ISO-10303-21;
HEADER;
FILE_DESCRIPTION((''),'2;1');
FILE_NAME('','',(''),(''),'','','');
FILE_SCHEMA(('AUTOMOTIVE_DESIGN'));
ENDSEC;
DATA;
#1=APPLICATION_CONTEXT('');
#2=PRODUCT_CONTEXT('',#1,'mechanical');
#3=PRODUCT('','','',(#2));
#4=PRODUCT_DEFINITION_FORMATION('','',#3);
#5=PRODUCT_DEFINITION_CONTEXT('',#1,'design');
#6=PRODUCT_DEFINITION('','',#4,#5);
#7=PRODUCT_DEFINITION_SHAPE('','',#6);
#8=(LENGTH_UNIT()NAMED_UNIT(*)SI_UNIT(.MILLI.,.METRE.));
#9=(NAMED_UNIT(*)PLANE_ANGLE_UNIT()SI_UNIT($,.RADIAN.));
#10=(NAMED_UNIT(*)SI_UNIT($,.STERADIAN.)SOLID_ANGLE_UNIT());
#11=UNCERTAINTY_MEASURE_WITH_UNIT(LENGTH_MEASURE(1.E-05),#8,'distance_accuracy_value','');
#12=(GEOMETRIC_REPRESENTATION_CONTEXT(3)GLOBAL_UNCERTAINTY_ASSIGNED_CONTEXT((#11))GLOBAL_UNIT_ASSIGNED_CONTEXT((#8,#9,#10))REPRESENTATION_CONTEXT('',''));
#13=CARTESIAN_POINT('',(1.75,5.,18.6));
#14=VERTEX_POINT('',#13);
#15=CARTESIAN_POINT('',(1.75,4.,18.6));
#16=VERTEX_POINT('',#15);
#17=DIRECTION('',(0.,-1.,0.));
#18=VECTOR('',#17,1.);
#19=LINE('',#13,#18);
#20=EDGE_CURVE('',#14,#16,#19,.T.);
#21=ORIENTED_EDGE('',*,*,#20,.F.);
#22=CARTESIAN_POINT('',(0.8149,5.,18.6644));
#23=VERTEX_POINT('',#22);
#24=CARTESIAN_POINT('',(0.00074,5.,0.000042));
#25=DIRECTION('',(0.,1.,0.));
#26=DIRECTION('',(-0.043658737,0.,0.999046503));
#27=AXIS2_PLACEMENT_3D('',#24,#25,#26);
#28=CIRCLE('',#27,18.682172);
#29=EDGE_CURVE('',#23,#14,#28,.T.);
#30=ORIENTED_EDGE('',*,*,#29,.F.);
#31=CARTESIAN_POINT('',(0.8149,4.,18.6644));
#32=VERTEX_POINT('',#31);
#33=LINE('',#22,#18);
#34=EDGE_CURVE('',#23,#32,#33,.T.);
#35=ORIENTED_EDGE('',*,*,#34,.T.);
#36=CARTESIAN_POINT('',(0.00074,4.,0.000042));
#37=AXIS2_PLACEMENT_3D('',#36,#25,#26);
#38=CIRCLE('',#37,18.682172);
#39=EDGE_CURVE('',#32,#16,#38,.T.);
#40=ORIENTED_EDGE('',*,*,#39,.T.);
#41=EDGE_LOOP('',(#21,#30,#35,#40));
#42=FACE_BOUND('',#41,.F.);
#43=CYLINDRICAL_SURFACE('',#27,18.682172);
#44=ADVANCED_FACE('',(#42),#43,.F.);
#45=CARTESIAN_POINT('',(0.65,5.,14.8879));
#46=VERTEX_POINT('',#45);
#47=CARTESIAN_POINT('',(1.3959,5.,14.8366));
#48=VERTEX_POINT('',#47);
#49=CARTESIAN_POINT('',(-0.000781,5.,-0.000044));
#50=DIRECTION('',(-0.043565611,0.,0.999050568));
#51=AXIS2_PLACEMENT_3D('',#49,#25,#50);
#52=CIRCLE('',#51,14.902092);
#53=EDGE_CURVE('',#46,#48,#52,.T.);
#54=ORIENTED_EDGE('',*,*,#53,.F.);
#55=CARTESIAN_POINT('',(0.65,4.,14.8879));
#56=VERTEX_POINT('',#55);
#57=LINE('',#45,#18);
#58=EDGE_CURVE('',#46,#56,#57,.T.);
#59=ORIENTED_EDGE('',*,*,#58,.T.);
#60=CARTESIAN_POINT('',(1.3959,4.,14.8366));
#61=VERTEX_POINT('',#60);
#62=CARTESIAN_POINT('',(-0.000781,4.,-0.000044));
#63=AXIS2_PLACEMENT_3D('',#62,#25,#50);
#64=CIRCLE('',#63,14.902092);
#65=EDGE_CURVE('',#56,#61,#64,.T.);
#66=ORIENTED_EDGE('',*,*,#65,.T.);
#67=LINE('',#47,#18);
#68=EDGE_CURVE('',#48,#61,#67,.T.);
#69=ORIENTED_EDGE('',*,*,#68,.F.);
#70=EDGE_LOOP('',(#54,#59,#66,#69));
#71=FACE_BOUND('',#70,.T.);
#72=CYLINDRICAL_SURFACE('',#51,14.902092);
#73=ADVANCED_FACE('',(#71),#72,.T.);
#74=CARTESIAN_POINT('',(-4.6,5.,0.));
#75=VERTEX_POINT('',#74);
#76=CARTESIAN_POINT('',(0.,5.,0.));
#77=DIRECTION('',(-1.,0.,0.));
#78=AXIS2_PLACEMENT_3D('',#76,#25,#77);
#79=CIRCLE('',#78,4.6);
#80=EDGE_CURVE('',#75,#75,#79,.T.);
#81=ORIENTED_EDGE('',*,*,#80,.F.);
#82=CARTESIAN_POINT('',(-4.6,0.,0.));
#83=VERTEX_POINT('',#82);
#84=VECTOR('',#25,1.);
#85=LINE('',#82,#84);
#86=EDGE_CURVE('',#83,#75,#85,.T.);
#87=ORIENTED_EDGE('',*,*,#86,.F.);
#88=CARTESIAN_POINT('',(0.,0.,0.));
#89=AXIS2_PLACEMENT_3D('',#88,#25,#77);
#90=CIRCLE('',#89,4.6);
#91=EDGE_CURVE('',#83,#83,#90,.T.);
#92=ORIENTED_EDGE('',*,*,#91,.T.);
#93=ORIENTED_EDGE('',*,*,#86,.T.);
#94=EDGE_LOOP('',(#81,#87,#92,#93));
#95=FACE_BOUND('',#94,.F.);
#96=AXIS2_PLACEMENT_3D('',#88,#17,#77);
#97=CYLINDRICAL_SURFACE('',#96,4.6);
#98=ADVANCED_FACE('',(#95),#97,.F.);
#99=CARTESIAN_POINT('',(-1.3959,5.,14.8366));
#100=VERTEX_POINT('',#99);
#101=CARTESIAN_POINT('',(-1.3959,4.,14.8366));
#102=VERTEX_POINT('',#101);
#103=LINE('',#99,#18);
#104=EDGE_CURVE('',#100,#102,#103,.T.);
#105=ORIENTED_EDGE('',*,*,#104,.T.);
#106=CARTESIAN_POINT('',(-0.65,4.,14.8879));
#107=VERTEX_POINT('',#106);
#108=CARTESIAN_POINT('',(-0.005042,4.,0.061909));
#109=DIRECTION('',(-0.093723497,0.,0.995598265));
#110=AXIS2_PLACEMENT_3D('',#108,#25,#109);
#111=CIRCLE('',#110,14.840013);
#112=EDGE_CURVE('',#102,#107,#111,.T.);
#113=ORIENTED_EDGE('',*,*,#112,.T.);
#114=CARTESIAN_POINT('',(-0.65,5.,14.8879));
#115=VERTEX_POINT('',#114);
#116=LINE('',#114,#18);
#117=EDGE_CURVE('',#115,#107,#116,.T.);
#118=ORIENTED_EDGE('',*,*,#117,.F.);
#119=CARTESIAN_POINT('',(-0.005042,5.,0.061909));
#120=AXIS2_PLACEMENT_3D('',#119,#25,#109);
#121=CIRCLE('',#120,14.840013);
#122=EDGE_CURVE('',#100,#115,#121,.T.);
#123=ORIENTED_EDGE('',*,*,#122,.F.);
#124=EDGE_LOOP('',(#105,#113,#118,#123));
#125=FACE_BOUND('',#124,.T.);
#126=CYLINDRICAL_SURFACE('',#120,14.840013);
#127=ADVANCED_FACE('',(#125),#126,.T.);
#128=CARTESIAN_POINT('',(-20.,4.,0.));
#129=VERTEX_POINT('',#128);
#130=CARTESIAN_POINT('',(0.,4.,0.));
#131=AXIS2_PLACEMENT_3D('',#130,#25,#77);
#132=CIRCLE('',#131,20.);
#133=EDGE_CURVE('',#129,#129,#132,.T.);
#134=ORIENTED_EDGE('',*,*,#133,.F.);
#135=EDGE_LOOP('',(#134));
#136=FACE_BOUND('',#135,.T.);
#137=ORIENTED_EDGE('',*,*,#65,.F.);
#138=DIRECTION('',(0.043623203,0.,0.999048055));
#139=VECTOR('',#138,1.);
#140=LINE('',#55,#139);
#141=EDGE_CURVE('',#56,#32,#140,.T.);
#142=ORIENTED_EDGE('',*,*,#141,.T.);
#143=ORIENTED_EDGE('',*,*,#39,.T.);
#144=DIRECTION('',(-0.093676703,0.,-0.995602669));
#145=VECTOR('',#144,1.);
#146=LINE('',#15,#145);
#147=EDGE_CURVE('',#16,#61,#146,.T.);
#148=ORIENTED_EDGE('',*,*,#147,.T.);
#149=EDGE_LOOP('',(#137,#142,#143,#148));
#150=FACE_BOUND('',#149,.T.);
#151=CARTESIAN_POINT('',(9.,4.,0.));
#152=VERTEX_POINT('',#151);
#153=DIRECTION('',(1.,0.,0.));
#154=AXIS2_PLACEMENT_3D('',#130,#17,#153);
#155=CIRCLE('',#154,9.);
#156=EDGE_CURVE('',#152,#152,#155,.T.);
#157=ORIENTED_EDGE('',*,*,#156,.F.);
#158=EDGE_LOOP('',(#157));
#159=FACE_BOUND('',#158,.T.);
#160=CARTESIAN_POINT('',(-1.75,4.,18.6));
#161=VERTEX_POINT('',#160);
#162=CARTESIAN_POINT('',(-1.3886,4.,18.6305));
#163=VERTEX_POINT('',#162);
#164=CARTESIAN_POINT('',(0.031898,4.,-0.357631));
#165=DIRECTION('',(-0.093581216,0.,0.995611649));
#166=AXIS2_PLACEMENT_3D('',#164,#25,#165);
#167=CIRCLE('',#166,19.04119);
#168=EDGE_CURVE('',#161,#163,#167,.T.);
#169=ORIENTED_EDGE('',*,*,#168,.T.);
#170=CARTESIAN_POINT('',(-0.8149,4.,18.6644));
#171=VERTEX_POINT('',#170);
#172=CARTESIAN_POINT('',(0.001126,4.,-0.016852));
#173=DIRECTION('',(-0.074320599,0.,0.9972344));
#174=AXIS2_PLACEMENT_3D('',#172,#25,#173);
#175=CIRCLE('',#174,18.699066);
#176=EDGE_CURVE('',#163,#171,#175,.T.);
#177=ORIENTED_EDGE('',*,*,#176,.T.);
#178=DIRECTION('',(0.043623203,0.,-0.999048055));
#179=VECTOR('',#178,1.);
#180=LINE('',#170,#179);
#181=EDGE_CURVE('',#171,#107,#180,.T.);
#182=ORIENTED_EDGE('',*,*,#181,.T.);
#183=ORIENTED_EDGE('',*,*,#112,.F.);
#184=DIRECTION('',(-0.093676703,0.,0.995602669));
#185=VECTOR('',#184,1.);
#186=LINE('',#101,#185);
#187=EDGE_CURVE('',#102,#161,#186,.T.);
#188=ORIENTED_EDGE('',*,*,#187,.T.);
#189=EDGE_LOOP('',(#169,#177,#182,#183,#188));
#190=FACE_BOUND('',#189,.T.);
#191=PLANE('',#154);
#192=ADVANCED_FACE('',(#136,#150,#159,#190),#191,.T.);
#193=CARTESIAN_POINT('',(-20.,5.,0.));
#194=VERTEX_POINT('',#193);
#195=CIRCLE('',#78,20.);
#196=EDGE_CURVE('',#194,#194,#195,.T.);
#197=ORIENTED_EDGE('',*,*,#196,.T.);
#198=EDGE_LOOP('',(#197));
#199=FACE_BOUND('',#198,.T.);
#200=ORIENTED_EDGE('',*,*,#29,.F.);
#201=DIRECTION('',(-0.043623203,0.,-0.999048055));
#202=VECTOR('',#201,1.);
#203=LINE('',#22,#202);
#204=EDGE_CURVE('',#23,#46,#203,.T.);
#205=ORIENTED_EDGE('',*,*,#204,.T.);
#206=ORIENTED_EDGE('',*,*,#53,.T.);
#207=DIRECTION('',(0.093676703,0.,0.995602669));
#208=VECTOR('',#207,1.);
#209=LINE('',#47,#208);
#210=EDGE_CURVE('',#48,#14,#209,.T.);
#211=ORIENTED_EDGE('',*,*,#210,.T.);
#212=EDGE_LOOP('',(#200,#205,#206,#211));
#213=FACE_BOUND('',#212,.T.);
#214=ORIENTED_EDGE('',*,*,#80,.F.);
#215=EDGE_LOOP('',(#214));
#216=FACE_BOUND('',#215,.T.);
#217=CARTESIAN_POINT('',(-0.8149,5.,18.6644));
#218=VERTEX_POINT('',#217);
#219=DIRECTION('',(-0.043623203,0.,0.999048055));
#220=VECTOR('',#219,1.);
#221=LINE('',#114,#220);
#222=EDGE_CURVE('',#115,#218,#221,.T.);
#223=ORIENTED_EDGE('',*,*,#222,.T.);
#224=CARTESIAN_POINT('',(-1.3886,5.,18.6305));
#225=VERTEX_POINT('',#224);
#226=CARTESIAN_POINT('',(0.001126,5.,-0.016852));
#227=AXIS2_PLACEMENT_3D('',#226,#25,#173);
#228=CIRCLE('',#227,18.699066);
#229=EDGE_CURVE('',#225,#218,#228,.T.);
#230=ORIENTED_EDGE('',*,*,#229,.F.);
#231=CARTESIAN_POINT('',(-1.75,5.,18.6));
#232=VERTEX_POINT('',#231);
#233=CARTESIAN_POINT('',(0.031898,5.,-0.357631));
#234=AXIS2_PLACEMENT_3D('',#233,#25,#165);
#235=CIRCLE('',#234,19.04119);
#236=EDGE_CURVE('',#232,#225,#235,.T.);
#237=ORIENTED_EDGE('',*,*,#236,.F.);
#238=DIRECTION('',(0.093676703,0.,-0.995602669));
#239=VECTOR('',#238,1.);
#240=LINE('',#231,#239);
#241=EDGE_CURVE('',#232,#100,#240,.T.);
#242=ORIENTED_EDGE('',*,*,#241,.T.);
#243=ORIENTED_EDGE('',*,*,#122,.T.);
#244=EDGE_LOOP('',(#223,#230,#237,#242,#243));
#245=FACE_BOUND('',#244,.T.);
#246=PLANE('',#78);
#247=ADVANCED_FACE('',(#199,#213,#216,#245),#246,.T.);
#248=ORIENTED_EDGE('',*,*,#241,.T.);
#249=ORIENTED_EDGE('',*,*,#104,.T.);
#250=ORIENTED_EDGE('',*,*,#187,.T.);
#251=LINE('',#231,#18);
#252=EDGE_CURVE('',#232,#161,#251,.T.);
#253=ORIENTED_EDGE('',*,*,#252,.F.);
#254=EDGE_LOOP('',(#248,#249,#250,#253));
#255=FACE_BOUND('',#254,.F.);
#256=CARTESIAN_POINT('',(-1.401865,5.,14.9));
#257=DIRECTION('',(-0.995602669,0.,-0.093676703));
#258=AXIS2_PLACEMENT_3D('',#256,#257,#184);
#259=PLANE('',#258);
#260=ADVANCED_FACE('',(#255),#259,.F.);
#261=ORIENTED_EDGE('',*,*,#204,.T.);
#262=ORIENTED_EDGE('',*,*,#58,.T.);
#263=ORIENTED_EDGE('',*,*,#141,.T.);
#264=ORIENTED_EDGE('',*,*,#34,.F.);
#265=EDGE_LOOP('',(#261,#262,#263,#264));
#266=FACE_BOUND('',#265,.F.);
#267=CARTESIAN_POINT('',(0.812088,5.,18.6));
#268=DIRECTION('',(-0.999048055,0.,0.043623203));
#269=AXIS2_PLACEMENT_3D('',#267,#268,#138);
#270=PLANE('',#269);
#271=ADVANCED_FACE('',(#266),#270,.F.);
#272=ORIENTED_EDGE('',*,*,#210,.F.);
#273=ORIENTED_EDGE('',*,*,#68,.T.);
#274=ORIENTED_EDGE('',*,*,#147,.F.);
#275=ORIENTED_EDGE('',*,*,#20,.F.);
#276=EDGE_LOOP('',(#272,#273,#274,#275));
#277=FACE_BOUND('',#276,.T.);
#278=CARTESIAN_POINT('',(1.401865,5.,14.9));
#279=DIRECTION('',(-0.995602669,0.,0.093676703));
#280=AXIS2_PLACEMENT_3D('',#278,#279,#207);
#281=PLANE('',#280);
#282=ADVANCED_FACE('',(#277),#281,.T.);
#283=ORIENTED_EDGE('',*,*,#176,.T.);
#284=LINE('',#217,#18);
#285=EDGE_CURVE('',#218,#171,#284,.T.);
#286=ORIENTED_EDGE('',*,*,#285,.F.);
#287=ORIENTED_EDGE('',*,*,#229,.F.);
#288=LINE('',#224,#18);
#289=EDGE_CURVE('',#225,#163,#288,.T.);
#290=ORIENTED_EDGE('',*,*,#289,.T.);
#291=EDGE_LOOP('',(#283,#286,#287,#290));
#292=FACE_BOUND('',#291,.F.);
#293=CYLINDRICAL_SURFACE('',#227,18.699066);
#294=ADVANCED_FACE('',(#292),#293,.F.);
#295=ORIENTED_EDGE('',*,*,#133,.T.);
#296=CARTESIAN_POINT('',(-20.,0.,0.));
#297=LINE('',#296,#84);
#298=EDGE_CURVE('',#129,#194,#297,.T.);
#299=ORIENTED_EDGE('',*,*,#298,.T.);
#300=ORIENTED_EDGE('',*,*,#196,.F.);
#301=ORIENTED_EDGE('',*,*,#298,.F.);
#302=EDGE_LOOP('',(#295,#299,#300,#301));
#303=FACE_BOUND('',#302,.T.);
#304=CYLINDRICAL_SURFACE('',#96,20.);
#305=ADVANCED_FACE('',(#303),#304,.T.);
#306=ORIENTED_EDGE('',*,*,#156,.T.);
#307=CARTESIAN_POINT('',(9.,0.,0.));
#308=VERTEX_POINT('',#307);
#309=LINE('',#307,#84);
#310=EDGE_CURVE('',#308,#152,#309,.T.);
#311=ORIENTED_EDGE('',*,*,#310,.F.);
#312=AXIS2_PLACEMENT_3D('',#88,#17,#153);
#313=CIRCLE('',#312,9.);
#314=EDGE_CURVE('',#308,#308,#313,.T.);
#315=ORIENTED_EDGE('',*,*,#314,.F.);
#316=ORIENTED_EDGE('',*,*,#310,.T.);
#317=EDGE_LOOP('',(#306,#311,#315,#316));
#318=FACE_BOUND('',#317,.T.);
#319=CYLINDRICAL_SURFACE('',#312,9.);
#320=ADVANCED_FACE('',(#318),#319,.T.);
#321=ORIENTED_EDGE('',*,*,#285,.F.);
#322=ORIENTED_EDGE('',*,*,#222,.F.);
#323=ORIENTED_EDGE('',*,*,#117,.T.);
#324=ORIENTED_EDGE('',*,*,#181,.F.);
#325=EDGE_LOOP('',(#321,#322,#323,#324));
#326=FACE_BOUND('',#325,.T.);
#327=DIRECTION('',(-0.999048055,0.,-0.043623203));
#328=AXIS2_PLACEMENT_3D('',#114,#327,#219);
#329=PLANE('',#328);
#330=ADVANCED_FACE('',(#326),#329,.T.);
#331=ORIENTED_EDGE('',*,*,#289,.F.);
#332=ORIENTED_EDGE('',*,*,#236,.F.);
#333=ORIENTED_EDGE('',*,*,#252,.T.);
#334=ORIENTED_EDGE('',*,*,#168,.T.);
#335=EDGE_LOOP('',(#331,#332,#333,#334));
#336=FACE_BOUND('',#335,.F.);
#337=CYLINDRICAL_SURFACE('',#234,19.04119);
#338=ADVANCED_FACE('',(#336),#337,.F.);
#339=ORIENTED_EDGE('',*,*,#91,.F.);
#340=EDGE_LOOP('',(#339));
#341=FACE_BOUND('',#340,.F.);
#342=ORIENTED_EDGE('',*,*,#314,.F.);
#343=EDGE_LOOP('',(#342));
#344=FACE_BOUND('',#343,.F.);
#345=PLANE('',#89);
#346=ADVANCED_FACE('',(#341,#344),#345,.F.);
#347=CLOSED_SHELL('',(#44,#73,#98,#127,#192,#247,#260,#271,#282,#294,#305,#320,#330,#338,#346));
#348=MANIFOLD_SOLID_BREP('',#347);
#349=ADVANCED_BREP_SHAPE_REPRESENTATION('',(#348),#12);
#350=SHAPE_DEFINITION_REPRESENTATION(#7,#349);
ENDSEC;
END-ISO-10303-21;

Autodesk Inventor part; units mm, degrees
ref_plane "YZ Plane" through (0, 0, 0) normal (1, 0, 0) x (0, 1, 0)
ref_plane "XZ Plane" through (0, 0, 0) normal (0, 1, 0) x (-1, 0, 0)
ref_plane "XY Plane" through (0, 0, 0) normal (0, 0, 1) x (1, 0, 0)
sketch "Sketch1" plane through (0, 0, 0) normal (0, 1, 0) x (-1, 0, 0)
  circle A0 centre (0, 0) radius 20
  line L0 (0, 0) -> (20, 0)
  circle A1 centre (0, 0) radius 4.6
  dimension "d1" = 40
  dimension "d6" = 9.2
extrude "Extrusion1" add sketch "Sketch1" along normal blind 5
sketch "Sketch2" plane through (0, 0, 0) normal (0, -1, 0) x (1, 0, 0)
  circle A0 centre (0, 0) radius 4.6 projected
  circle A1 centre (0, 0) radius 20 projected
  circle A2 centre (0, 0) radius 9
  circle A3 centre (0, 0) radius 20
  dimension "d7" = 18
extrude "Extrusion2" cut sketch "Sketch2" against normal blind 4 contours A1
sketch "Sketch3" plane through (0, 5, 0) normal (0, 1, 0) x (1, 0, 0)
  circle A0 centre (0, 0) radius 4.6 projected
  circle A1 centre (0, 0) radius 20 projected
  line L0 (0, 0) -> (0, -20)
  circle A2 centre (0, 0) radius 20 projected
  line L1 (2.4, -13.5) -> (2.4, -20)
  line L2 (2.4, -20) -> (-2.4, -20)
  line L3 (-2.4, -20) -> (-2.4, -13.5)
  line L4 (-2.4, -13.5) -> (2.4, -13.5)
  line L5 (2.4, -13.5) -> (-2.4, -20) construction
  line L6 (2.4, -20) -> (-2.4, -13.5) construction
  line L7 (0.25, -18.6) -> (1.75, -18.6)
  line L8 (1.75, -18.6) -> (1.75, -14.9)
  line L9 (1.75, -14.9) -> (0.25, -14.9)
  line L10 (0.25, -14.9) -> (0.25, -18.6)
  line L11 (-0.25, -18.6) -> (-1.75, -18.6)
  line L12 (-1.75, -18.6) -> (-1.75, -14.9)
  line L13 (-1.75, -14.9) -> (-0.25, -14.9)
  line L14 (-0.25, -14.9) -> (-0.25, -18.6)
  arc A3 (-0.8149, -18.6644) -> (-1.75, -18.6) centre (0, 0) ccw
  arc A4 (-0.65, -14.8879) -> (-1.3959, -14.8366) centre (0, 0) ccw
  line L15 (0, 0) -> (-0.65, -14.8879)
  line L16 (0, 0) -> (0.65, -14.8879)
  line L17 (0, 0) -> (-1.3959, -14.8366)
  line L18 (0, 0) -> (1.3959, -14.8366)
  arc A5 (-1.3959, -14.8366) -> (-0.65, -14.8879) centre (0, 0) ccw
  arc A6 (-1.3886, -18.6305) -> (-0.8149, -18.6644) centre (0, 0) ccw
  arc A7 (-1.75, -18.6) -> (-1.3886, -18.6305) centre (0, 0) ccw
  line L19 (-0.65, -14.8879) -> (-0.8149, -18.6644)
  line L20 (-1.3959, -14.8366) -> (-1.75, -18.6)
  line L21 (1.3959, -14.8366) -> (1.75, -18.6)
  line L22 (0.65, -14.8879) -> (0.8149, -18.6644)
  point P0 (0, -16.75)
  dimension "d10" = 0
  dimension "d11" = 4.8
  dimension "d12" = 6.5
  dimension "d13" = 1.5
  dimension "d14" = 3.7
  dimension "d17" = 1.4
  dimension "d40" = 2
  dimension "d41" = 0.25
  dimension "d76" = 5
  dimension "d77" = 2.5
extrude "Extrusion4" cut sketch "Sketch3" against normal blind 10 contours A5 L19 L13 L20 | L21 L9 L22 A4 | L13 L19 L11 L20 | L21 L7 L22 L9 | L11 L19 A6 A7 | A3 L22 L7
equation "\"d17\" = -0.5 * d14 + 0.5 * d12"
equation "\"d41\" = -0.5 * d13 + 0.5 * d40"
equation "\"d77\" = 0.5 * d76"
properties part number "BigPositionDisk"
